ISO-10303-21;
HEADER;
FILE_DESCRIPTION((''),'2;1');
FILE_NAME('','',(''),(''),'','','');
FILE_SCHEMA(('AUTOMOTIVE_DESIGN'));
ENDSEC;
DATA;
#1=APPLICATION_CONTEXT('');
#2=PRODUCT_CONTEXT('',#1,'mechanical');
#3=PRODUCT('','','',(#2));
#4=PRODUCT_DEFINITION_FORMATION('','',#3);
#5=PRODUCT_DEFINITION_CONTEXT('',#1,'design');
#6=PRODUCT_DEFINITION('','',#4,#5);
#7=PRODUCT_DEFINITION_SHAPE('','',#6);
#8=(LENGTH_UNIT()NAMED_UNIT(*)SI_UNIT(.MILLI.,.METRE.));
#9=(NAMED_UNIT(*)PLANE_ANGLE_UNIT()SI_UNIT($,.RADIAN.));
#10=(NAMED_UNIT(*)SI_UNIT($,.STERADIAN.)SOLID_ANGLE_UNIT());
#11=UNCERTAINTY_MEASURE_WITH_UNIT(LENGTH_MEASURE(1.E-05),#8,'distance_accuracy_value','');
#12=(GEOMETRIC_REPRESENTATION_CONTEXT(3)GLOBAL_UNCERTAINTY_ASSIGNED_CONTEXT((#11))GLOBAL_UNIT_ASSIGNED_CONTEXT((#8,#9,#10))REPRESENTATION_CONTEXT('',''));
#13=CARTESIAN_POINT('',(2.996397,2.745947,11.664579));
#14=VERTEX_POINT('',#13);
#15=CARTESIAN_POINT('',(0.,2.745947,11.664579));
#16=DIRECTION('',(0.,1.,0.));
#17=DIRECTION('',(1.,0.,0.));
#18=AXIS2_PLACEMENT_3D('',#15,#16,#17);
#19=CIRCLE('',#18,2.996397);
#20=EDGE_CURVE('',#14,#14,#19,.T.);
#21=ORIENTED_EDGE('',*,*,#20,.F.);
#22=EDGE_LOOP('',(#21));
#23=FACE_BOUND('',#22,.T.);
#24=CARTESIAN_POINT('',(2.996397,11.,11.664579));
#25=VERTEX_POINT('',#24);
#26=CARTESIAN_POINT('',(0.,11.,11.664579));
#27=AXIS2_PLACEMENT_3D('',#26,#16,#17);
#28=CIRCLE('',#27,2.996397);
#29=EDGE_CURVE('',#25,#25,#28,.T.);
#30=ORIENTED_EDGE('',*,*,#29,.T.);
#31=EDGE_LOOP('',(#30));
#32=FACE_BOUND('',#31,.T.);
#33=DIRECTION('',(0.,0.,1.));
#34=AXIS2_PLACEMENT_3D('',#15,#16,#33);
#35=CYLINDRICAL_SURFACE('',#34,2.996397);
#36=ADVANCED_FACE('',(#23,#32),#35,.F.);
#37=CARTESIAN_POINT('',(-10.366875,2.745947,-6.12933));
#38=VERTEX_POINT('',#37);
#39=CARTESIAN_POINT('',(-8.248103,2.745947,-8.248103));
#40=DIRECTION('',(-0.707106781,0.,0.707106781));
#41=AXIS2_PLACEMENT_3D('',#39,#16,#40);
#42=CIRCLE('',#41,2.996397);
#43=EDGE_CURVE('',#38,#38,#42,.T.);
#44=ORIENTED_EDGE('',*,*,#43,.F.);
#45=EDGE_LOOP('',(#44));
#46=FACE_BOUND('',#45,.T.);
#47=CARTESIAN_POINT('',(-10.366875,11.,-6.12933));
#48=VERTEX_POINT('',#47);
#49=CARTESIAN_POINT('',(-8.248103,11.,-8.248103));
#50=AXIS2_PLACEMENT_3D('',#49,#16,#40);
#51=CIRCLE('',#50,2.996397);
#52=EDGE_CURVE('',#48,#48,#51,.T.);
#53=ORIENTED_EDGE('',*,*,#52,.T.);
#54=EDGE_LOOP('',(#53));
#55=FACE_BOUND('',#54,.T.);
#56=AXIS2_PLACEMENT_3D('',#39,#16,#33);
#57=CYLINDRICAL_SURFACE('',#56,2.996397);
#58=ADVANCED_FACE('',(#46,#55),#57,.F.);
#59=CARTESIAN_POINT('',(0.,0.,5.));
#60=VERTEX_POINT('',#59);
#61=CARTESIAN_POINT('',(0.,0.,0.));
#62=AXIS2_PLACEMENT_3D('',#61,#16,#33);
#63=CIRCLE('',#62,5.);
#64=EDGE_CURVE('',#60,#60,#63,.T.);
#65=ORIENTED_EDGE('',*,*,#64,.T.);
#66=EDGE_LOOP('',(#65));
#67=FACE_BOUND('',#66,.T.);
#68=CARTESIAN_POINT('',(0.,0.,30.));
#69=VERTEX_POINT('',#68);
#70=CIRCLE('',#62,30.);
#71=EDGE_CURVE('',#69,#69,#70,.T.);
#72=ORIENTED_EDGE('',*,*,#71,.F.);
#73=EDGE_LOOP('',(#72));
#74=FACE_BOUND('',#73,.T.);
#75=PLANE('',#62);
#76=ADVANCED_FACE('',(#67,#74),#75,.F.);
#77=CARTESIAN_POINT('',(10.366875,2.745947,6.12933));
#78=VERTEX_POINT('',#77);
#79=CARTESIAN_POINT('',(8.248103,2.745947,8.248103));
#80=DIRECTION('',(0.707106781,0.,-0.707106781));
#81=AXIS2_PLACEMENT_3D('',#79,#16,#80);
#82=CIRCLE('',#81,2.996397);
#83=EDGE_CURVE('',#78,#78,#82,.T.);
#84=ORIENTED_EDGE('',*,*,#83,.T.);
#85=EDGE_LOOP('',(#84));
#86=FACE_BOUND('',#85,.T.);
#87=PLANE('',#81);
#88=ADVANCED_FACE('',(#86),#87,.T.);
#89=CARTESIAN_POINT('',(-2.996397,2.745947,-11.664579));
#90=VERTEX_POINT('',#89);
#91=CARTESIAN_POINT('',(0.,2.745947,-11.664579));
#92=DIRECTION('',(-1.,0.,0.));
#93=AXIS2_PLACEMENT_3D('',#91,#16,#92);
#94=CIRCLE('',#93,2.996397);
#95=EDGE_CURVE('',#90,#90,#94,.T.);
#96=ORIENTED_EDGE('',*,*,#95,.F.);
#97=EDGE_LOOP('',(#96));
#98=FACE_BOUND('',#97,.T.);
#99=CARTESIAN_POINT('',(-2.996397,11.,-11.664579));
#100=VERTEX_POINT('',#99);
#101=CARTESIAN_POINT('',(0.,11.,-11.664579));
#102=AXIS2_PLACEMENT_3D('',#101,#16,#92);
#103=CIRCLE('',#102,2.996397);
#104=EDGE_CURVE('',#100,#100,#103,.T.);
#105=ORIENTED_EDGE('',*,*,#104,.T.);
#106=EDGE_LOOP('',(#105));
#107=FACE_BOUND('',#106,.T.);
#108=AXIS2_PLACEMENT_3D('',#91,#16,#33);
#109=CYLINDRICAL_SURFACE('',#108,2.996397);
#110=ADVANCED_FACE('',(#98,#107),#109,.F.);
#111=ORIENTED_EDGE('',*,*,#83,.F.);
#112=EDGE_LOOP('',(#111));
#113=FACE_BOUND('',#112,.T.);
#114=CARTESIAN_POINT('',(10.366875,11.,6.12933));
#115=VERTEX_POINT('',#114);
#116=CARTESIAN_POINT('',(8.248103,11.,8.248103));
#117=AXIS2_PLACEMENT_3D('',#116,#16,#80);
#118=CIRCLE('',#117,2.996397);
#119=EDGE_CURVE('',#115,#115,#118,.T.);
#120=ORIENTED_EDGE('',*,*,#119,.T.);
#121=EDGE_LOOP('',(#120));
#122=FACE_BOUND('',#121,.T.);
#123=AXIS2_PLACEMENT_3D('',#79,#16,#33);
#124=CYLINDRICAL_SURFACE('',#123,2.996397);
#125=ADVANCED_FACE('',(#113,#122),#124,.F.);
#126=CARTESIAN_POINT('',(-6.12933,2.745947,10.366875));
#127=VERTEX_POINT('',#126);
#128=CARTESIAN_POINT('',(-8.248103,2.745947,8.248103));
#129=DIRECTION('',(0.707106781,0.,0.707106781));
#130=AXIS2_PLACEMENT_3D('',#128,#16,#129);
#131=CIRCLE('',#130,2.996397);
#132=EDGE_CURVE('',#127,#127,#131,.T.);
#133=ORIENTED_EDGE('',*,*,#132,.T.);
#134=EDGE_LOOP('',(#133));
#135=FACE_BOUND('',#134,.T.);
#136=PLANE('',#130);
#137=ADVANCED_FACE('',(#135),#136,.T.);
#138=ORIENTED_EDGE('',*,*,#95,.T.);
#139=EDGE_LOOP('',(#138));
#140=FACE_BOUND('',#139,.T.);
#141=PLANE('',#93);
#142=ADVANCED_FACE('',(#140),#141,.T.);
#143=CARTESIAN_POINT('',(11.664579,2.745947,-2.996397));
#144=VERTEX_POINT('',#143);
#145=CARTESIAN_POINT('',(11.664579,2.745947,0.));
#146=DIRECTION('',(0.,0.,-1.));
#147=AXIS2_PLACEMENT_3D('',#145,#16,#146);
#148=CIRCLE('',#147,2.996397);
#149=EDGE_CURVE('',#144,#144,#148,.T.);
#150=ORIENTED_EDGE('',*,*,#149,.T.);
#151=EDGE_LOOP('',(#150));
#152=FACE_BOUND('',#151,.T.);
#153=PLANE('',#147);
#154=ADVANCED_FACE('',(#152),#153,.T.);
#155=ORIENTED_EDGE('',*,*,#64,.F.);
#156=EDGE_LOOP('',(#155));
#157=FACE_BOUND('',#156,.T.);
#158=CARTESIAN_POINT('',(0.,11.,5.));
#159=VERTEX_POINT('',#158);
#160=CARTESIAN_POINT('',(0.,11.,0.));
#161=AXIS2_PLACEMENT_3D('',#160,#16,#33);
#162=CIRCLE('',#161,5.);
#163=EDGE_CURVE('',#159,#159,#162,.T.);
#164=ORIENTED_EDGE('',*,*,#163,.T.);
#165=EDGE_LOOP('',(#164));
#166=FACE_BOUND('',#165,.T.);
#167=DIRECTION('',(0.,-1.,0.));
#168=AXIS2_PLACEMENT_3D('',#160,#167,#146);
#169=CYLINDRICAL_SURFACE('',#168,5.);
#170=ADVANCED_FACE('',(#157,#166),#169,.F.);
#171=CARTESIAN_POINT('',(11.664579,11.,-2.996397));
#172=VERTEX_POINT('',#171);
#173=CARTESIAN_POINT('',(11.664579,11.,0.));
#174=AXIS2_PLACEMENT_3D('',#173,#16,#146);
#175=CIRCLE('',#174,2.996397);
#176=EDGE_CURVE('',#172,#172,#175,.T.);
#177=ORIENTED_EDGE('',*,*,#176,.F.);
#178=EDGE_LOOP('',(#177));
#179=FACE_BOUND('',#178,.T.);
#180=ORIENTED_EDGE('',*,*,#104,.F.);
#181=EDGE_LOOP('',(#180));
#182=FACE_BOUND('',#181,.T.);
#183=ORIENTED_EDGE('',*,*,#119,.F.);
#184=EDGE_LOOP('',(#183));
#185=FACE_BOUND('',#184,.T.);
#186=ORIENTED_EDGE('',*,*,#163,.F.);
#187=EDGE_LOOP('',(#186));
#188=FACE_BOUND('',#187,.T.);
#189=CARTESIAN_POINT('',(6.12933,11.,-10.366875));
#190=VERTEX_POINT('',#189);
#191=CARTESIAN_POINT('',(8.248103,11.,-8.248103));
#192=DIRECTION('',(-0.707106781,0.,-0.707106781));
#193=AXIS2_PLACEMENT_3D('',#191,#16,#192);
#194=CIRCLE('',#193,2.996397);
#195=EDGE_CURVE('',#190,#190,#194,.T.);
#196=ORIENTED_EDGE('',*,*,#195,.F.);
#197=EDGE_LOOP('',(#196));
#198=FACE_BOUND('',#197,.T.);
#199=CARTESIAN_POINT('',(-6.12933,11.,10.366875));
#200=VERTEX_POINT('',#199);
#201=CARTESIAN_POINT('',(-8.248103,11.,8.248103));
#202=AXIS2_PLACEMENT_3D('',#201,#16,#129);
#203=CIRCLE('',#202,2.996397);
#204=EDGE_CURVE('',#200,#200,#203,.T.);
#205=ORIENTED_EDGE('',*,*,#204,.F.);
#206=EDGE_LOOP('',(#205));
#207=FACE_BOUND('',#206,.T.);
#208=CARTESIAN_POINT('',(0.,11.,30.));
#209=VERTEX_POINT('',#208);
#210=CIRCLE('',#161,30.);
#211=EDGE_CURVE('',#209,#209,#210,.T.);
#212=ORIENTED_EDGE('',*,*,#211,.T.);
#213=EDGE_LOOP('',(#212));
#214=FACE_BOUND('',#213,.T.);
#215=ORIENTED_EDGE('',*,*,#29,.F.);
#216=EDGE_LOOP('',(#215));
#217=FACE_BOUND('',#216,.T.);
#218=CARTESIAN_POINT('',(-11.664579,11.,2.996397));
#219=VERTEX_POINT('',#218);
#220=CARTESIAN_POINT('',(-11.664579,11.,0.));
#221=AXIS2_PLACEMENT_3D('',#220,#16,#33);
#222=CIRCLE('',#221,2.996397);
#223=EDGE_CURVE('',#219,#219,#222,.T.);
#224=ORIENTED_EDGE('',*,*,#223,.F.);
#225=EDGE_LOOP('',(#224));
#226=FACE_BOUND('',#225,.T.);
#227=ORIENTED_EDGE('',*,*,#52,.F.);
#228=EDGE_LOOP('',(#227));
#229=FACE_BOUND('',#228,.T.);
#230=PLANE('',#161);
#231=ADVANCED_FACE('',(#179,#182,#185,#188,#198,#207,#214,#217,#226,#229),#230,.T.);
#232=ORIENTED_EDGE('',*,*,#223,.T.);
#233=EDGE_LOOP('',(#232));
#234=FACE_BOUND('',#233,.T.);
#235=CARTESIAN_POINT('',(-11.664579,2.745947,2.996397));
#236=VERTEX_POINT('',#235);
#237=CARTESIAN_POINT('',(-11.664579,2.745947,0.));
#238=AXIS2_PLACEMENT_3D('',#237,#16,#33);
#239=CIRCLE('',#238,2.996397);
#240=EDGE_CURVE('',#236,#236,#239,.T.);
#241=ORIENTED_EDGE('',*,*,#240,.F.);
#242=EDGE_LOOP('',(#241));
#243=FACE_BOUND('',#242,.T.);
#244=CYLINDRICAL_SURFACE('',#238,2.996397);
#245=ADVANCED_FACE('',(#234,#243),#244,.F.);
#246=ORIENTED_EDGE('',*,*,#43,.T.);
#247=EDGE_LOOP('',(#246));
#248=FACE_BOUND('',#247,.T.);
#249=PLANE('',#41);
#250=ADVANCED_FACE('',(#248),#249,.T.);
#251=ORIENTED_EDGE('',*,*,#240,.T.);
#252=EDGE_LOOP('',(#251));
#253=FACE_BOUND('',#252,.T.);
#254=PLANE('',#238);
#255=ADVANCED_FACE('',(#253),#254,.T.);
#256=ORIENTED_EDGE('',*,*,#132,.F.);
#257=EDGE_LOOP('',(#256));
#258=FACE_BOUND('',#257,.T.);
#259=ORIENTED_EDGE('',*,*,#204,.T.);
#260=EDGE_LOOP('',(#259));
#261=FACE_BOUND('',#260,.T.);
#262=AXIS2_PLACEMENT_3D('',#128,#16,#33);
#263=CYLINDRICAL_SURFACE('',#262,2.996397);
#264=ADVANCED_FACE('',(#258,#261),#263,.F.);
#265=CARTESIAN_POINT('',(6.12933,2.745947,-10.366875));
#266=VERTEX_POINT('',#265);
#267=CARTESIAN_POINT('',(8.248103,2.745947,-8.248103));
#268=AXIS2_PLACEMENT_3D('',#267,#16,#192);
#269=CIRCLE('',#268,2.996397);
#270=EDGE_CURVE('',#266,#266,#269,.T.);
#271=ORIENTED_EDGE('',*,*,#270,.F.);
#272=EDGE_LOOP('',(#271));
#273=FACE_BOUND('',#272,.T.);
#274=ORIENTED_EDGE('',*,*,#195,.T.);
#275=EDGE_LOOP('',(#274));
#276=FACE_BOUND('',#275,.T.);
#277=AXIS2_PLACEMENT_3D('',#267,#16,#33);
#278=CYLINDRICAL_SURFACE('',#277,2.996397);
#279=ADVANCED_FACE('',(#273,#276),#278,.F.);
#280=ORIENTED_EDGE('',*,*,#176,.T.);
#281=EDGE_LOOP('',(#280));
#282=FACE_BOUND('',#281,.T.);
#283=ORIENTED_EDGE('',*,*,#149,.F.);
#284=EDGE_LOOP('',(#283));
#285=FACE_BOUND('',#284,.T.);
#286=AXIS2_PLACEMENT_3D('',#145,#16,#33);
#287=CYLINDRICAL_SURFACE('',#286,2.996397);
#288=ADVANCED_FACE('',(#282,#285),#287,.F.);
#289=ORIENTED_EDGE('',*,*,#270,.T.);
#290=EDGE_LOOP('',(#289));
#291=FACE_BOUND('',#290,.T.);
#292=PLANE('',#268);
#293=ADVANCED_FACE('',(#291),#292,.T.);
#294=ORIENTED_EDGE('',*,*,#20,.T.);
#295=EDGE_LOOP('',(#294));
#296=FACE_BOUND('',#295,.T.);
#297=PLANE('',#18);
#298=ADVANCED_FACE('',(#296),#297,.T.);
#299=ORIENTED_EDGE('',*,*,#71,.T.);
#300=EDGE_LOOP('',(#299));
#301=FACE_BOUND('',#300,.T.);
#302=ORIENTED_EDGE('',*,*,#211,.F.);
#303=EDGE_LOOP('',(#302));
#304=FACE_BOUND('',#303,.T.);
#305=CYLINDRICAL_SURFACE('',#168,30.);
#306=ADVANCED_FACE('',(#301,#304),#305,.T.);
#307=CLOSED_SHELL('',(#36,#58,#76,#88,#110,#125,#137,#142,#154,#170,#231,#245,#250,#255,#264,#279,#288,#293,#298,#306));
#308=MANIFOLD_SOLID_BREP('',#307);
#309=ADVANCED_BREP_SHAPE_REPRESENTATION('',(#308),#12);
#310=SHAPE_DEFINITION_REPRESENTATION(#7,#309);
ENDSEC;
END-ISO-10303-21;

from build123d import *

# Parameters (mm, degrees)
SKETCH1_R           = 30
BOSS_EXTRUDE1_DEPTH = 11
SKETCH2_R           = 5
CUT_EXTRUDE1_DEPTH  = 44.829214002
SKETCH3_R           = 2.996397125
CUT_EXTRUDE2_DEPTH  = 8.254053305
CIRPATTERN1_COUNT   = 8


with BuildPart() as part:
    # Sketch1 → Boss-Extrude1 (new body)
    with BuildSketch(Plane(origin=(0, 0, 0), x_dir=(1, 0, 0), z_dir=(0, 1, 0))):
        Circle(SKETCH1_R)
    extrude(amount=BOSS_EXTRUDE1_DEPTH)

    # Sketch2 → Cut-Extrude1 (cut, through all)
    with BuildSketch(Plane(origin=(0, 0, 0), x_dir=(1, 0, 0), z_dir=(0, 1, 0))):
        Circle(SKETCH2_R)
    extrude(amount=CUT_EXTRUDE1_DEPTH, mode=Mode.SUBTRACT)

    # Sketch3 → Cut-Extrude2 (cut)
    with BuildSketch(Plane(origin=(0, 11, 0), x_dir=(1, 0, 0), z_dir=(0, 1, 0))):
        with Locations((-11.664578658, 0)):
            Circle(SKETCH3_R)
    cut_extrude2 = extrude(amount=-CUT_EXTRUDE2_DEPTH, mode=Mode.SUBTRACT)

    # CirPattern1: Cut-Extrude2 ×8 about axis
    cirpattern1_axis = Axis((0, 0, 0), (0, 1, 0))
    for i in range(1, CIRPATTERN1_COUNT):
        add(cut_extrude2.rotate(cirpattern1_axis, i * 360 / CIRPATTERN1_COUNT), mode=Mode.SUBTRACT)


solid = part.part
